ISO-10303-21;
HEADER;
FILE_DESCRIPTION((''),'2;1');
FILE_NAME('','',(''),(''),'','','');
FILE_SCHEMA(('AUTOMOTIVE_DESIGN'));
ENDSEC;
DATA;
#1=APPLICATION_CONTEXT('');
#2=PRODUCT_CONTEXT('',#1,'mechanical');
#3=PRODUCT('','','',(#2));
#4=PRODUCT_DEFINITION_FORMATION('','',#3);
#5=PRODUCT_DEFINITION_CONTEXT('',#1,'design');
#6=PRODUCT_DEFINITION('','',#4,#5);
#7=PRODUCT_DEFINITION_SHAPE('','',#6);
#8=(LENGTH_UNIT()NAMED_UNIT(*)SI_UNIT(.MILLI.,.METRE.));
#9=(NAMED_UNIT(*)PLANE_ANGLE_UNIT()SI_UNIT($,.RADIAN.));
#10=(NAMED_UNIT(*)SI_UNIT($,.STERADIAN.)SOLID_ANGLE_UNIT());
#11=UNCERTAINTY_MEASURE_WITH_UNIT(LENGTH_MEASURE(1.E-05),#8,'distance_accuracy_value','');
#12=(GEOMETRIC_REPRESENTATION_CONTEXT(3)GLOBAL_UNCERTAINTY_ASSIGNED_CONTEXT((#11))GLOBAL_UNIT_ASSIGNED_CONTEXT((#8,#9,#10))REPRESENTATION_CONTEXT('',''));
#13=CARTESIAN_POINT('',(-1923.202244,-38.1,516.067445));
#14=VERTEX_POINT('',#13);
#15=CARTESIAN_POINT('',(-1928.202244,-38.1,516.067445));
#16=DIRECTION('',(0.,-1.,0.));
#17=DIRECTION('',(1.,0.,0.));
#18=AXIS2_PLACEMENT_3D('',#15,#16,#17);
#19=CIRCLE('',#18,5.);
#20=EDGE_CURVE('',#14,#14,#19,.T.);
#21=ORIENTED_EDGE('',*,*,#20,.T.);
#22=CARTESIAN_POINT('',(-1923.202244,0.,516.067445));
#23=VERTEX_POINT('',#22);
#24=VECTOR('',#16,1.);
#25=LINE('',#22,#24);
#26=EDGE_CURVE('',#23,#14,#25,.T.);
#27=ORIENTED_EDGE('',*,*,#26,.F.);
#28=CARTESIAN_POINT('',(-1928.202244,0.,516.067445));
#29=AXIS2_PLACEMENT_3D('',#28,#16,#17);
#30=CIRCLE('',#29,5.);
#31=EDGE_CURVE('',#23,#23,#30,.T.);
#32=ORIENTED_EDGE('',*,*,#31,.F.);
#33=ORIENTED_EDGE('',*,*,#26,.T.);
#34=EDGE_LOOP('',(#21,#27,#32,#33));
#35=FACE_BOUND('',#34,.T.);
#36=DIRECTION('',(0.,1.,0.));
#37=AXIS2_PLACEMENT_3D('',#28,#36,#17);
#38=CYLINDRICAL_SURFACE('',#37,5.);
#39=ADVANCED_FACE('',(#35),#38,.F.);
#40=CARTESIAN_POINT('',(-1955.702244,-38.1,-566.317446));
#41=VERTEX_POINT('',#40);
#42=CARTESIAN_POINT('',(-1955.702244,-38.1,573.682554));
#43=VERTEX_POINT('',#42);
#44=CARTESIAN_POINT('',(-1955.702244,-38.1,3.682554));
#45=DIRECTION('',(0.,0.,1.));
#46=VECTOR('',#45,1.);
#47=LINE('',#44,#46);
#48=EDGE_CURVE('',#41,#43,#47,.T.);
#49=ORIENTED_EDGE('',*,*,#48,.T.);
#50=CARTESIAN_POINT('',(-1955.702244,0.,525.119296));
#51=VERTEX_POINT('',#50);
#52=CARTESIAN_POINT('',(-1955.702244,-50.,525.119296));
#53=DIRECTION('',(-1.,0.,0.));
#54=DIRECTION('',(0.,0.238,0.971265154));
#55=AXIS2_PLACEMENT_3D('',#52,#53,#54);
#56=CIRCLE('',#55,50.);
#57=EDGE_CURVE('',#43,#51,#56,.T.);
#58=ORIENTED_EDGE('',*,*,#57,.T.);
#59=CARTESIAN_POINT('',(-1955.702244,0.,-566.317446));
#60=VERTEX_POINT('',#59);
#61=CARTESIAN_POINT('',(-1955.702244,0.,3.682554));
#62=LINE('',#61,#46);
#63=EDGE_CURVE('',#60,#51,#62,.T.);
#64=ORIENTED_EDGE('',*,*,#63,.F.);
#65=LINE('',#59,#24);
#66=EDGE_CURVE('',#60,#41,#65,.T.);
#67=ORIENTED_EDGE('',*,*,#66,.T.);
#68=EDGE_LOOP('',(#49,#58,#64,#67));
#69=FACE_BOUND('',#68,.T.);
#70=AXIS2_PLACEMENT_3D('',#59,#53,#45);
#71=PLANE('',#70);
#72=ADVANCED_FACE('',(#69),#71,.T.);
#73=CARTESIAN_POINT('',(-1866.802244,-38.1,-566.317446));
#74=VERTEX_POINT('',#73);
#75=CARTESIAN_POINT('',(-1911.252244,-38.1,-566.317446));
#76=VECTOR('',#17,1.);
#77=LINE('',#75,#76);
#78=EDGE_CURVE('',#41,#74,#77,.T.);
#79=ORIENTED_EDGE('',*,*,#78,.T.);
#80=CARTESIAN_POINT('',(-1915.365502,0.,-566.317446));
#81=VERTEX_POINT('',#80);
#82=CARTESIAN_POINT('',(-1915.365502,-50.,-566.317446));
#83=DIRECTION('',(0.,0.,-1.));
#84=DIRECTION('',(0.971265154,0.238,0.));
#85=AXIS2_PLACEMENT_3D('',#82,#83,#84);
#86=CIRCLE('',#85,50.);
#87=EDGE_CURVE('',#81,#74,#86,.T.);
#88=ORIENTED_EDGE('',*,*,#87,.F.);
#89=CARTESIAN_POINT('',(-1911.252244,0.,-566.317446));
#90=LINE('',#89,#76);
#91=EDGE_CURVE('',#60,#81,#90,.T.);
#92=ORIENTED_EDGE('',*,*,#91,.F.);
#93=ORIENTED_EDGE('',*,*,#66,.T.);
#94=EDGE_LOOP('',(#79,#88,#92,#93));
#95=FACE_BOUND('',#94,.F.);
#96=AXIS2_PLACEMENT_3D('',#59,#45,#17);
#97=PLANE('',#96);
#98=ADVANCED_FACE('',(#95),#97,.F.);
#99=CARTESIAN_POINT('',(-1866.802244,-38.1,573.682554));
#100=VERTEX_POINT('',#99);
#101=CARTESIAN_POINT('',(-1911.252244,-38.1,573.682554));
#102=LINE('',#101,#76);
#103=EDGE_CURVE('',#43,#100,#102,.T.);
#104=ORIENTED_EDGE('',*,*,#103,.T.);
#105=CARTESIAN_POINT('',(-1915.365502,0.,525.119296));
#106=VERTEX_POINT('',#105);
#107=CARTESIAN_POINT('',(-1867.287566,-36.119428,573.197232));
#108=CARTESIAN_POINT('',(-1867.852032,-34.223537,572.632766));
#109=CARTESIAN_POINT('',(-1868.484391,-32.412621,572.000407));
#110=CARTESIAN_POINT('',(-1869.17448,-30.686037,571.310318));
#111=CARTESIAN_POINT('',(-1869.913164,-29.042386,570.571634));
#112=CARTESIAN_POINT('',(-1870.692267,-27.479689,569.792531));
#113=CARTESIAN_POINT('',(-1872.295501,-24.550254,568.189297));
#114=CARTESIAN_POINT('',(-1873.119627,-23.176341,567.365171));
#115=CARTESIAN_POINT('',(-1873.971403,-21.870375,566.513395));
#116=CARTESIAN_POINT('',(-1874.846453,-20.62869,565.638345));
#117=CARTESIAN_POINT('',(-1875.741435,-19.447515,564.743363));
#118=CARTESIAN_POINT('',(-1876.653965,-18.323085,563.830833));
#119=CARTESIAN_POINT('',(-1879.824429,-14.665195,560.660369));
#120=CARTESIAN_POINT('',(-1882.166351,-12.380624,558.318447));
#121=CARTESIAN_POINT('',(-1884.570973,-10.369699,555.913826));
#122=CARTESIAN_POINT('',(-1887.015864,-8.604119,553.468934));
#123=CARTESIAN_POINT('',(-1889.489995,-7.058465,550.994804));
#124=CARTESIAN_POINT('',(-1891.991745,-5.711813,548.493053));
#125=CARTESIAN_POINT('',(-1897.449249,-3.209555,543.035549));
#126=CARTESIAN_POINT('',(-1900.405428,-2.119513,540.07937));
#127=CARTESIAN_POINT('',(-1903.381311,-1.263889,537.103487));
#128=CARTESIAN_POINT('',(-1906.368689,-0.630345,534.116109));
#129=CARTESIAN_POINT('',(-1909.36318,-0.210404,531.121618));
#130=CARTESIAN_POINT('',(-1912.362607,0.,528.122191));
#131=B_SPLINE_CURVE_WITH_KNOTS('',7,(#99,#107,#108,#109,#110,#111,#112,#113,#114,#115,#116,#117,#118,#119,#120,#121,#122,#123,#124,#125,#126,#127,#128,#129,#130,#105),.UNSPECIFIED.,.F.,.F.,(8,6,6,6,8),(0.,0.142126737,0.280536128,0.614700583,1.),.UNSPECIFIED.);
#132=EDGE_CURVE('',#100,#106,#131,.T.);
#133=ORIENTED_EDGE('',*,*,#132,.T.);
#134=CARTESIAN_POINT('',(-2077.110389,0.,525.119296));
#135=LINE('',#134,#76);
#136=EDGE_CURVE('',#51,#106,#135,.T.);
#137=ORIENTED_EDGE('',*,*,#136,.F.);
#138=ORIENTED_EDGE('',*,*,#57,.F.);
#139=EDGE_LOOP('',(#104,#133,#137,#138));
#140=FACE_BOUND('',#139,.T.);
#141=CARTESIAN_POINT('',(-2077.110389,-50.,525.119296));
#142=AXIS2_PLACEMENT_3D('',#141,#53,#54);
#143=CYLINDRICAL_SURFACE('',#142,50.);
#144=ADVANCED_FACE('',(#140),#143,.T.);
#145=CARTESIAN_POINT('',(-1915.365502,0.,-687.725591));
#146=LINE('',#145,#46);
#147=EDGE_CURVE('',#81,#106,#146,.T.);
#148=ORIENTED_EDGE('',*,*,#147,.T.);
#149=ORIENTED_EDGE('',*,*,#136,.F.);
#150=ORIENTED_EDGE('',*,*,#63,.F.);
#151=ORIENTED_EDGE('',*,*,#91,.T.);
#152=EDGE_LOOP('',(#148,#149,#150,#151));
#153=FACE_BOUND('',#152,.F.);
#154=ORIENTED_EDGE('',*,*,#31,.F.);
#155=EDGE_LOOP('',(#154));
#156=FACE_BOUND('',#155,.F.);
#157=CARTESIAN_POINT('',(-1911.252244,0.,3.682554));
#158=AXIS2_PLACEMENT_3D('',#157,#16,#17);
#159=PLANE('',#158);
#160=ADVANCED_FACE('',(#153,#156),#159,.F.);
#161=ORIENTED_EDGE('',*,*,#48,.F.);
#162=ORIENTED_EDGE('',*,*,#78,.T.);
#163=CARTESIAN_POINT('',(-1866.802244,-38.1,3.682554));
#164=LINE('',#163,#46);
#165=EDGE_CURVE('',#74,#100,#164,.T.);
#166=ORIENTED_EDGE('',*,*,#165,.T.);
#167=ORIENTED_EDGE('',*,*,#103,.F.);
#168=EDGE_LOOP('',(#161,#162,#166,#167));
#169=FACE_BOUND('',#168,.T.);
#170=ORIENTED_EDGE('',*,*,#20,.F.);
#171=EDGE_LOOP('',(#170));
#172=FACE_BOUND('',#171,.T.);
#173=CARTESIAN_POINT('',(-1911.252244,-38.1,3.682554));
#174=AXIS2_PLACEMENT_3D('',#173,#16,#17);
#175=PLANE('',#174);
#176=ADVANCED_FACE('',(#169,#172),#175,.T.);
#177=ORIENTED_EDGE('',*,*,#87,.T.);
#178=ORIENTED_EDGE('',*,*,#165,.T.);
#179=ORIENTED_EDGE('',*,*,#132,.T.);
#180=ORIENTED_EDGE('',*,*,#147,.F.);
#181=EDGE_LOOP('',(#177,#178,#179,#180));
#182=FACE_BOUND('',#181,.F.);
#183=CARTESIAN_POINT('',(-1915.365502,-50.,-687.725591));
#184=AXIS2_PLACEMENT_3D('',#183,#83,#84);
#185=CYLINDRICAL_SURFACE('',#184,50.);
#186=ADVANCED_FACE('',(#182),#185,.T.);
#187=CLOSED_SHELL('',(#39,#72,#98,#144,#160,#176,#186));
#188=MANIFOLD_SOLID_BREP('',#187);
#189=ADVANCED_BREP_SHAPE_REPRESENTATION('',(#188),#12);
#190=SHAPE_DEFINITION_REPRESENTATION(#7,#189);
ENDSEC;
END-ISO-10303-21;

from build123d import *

# Parameters (mm, degrees)
F0_W        = 88.9
F0_H        = 1140
F0_R        = 5
F1_DEPTH    = 38.1
F2_T1_DEPTH = 1382.8162885805
F2_T3_DEPTH = 331.7162885805


# Not quite as in the source:
# - a fillet or chamfer that OpenCascade refuses, or shapes differently, is made with other operations: its cross-section is extruded or revolved along the edge and cut away or added


with BuildPart() as f1:
    # F0 (on Front) → F1 (new body)
    with BuildSketch(Plane.XZ):
        with Locations((-1911.2522443051, 3.6825537682)):
            Rectangle(F0_W, F0_H)
        with Locations((-1928.2022443051, 516.0674452782)):
            Circle(F0_R, mode=Mode.SUBTRACT)
    extrude(amount=F1_DEPTH)

    # F2: fillet of radius 50 on 2 edges, made by hand

    # F2_s2 → F2_t1 (cut)
    with BuildSketch(Plane.XY.offset(-687.7255905221)):
        with BuildLine():
            ThreePointArc((-1866.8022443051, -38.1), (-1884.5029032971, -10.6617234745), (-1915.3655020212, 0))
            Line((-1915.3655020212, 0), (-1866.8022443051, 0))
            Line((-1866.8022443051, 0), (-1866.8022443051, -38.1))
        make_face()
    extrude(amount=F2_T1_DEPTH, mode=Mode.SUBTRACT)

    # F2_s4 → F2_t3 (cut)
    with BuildSketch(Plane.YZ.offset(-2077.1103885953)):
        with BuildLine():
            ThreePointArc((-38.1, 573.6825537682), (-10.6617234745, 555.9818947761), (0, 525.1192960521))
            Line((0, 525.1192960521), (0, 573.6825537682))
            Line((0, 573.6825537682), (-38.1, 573.6825537682))
        make_face()
    extrude(amount=F2_T3_DEPTH, mode=Mode.SUBTRACT)


solid = f1.part
